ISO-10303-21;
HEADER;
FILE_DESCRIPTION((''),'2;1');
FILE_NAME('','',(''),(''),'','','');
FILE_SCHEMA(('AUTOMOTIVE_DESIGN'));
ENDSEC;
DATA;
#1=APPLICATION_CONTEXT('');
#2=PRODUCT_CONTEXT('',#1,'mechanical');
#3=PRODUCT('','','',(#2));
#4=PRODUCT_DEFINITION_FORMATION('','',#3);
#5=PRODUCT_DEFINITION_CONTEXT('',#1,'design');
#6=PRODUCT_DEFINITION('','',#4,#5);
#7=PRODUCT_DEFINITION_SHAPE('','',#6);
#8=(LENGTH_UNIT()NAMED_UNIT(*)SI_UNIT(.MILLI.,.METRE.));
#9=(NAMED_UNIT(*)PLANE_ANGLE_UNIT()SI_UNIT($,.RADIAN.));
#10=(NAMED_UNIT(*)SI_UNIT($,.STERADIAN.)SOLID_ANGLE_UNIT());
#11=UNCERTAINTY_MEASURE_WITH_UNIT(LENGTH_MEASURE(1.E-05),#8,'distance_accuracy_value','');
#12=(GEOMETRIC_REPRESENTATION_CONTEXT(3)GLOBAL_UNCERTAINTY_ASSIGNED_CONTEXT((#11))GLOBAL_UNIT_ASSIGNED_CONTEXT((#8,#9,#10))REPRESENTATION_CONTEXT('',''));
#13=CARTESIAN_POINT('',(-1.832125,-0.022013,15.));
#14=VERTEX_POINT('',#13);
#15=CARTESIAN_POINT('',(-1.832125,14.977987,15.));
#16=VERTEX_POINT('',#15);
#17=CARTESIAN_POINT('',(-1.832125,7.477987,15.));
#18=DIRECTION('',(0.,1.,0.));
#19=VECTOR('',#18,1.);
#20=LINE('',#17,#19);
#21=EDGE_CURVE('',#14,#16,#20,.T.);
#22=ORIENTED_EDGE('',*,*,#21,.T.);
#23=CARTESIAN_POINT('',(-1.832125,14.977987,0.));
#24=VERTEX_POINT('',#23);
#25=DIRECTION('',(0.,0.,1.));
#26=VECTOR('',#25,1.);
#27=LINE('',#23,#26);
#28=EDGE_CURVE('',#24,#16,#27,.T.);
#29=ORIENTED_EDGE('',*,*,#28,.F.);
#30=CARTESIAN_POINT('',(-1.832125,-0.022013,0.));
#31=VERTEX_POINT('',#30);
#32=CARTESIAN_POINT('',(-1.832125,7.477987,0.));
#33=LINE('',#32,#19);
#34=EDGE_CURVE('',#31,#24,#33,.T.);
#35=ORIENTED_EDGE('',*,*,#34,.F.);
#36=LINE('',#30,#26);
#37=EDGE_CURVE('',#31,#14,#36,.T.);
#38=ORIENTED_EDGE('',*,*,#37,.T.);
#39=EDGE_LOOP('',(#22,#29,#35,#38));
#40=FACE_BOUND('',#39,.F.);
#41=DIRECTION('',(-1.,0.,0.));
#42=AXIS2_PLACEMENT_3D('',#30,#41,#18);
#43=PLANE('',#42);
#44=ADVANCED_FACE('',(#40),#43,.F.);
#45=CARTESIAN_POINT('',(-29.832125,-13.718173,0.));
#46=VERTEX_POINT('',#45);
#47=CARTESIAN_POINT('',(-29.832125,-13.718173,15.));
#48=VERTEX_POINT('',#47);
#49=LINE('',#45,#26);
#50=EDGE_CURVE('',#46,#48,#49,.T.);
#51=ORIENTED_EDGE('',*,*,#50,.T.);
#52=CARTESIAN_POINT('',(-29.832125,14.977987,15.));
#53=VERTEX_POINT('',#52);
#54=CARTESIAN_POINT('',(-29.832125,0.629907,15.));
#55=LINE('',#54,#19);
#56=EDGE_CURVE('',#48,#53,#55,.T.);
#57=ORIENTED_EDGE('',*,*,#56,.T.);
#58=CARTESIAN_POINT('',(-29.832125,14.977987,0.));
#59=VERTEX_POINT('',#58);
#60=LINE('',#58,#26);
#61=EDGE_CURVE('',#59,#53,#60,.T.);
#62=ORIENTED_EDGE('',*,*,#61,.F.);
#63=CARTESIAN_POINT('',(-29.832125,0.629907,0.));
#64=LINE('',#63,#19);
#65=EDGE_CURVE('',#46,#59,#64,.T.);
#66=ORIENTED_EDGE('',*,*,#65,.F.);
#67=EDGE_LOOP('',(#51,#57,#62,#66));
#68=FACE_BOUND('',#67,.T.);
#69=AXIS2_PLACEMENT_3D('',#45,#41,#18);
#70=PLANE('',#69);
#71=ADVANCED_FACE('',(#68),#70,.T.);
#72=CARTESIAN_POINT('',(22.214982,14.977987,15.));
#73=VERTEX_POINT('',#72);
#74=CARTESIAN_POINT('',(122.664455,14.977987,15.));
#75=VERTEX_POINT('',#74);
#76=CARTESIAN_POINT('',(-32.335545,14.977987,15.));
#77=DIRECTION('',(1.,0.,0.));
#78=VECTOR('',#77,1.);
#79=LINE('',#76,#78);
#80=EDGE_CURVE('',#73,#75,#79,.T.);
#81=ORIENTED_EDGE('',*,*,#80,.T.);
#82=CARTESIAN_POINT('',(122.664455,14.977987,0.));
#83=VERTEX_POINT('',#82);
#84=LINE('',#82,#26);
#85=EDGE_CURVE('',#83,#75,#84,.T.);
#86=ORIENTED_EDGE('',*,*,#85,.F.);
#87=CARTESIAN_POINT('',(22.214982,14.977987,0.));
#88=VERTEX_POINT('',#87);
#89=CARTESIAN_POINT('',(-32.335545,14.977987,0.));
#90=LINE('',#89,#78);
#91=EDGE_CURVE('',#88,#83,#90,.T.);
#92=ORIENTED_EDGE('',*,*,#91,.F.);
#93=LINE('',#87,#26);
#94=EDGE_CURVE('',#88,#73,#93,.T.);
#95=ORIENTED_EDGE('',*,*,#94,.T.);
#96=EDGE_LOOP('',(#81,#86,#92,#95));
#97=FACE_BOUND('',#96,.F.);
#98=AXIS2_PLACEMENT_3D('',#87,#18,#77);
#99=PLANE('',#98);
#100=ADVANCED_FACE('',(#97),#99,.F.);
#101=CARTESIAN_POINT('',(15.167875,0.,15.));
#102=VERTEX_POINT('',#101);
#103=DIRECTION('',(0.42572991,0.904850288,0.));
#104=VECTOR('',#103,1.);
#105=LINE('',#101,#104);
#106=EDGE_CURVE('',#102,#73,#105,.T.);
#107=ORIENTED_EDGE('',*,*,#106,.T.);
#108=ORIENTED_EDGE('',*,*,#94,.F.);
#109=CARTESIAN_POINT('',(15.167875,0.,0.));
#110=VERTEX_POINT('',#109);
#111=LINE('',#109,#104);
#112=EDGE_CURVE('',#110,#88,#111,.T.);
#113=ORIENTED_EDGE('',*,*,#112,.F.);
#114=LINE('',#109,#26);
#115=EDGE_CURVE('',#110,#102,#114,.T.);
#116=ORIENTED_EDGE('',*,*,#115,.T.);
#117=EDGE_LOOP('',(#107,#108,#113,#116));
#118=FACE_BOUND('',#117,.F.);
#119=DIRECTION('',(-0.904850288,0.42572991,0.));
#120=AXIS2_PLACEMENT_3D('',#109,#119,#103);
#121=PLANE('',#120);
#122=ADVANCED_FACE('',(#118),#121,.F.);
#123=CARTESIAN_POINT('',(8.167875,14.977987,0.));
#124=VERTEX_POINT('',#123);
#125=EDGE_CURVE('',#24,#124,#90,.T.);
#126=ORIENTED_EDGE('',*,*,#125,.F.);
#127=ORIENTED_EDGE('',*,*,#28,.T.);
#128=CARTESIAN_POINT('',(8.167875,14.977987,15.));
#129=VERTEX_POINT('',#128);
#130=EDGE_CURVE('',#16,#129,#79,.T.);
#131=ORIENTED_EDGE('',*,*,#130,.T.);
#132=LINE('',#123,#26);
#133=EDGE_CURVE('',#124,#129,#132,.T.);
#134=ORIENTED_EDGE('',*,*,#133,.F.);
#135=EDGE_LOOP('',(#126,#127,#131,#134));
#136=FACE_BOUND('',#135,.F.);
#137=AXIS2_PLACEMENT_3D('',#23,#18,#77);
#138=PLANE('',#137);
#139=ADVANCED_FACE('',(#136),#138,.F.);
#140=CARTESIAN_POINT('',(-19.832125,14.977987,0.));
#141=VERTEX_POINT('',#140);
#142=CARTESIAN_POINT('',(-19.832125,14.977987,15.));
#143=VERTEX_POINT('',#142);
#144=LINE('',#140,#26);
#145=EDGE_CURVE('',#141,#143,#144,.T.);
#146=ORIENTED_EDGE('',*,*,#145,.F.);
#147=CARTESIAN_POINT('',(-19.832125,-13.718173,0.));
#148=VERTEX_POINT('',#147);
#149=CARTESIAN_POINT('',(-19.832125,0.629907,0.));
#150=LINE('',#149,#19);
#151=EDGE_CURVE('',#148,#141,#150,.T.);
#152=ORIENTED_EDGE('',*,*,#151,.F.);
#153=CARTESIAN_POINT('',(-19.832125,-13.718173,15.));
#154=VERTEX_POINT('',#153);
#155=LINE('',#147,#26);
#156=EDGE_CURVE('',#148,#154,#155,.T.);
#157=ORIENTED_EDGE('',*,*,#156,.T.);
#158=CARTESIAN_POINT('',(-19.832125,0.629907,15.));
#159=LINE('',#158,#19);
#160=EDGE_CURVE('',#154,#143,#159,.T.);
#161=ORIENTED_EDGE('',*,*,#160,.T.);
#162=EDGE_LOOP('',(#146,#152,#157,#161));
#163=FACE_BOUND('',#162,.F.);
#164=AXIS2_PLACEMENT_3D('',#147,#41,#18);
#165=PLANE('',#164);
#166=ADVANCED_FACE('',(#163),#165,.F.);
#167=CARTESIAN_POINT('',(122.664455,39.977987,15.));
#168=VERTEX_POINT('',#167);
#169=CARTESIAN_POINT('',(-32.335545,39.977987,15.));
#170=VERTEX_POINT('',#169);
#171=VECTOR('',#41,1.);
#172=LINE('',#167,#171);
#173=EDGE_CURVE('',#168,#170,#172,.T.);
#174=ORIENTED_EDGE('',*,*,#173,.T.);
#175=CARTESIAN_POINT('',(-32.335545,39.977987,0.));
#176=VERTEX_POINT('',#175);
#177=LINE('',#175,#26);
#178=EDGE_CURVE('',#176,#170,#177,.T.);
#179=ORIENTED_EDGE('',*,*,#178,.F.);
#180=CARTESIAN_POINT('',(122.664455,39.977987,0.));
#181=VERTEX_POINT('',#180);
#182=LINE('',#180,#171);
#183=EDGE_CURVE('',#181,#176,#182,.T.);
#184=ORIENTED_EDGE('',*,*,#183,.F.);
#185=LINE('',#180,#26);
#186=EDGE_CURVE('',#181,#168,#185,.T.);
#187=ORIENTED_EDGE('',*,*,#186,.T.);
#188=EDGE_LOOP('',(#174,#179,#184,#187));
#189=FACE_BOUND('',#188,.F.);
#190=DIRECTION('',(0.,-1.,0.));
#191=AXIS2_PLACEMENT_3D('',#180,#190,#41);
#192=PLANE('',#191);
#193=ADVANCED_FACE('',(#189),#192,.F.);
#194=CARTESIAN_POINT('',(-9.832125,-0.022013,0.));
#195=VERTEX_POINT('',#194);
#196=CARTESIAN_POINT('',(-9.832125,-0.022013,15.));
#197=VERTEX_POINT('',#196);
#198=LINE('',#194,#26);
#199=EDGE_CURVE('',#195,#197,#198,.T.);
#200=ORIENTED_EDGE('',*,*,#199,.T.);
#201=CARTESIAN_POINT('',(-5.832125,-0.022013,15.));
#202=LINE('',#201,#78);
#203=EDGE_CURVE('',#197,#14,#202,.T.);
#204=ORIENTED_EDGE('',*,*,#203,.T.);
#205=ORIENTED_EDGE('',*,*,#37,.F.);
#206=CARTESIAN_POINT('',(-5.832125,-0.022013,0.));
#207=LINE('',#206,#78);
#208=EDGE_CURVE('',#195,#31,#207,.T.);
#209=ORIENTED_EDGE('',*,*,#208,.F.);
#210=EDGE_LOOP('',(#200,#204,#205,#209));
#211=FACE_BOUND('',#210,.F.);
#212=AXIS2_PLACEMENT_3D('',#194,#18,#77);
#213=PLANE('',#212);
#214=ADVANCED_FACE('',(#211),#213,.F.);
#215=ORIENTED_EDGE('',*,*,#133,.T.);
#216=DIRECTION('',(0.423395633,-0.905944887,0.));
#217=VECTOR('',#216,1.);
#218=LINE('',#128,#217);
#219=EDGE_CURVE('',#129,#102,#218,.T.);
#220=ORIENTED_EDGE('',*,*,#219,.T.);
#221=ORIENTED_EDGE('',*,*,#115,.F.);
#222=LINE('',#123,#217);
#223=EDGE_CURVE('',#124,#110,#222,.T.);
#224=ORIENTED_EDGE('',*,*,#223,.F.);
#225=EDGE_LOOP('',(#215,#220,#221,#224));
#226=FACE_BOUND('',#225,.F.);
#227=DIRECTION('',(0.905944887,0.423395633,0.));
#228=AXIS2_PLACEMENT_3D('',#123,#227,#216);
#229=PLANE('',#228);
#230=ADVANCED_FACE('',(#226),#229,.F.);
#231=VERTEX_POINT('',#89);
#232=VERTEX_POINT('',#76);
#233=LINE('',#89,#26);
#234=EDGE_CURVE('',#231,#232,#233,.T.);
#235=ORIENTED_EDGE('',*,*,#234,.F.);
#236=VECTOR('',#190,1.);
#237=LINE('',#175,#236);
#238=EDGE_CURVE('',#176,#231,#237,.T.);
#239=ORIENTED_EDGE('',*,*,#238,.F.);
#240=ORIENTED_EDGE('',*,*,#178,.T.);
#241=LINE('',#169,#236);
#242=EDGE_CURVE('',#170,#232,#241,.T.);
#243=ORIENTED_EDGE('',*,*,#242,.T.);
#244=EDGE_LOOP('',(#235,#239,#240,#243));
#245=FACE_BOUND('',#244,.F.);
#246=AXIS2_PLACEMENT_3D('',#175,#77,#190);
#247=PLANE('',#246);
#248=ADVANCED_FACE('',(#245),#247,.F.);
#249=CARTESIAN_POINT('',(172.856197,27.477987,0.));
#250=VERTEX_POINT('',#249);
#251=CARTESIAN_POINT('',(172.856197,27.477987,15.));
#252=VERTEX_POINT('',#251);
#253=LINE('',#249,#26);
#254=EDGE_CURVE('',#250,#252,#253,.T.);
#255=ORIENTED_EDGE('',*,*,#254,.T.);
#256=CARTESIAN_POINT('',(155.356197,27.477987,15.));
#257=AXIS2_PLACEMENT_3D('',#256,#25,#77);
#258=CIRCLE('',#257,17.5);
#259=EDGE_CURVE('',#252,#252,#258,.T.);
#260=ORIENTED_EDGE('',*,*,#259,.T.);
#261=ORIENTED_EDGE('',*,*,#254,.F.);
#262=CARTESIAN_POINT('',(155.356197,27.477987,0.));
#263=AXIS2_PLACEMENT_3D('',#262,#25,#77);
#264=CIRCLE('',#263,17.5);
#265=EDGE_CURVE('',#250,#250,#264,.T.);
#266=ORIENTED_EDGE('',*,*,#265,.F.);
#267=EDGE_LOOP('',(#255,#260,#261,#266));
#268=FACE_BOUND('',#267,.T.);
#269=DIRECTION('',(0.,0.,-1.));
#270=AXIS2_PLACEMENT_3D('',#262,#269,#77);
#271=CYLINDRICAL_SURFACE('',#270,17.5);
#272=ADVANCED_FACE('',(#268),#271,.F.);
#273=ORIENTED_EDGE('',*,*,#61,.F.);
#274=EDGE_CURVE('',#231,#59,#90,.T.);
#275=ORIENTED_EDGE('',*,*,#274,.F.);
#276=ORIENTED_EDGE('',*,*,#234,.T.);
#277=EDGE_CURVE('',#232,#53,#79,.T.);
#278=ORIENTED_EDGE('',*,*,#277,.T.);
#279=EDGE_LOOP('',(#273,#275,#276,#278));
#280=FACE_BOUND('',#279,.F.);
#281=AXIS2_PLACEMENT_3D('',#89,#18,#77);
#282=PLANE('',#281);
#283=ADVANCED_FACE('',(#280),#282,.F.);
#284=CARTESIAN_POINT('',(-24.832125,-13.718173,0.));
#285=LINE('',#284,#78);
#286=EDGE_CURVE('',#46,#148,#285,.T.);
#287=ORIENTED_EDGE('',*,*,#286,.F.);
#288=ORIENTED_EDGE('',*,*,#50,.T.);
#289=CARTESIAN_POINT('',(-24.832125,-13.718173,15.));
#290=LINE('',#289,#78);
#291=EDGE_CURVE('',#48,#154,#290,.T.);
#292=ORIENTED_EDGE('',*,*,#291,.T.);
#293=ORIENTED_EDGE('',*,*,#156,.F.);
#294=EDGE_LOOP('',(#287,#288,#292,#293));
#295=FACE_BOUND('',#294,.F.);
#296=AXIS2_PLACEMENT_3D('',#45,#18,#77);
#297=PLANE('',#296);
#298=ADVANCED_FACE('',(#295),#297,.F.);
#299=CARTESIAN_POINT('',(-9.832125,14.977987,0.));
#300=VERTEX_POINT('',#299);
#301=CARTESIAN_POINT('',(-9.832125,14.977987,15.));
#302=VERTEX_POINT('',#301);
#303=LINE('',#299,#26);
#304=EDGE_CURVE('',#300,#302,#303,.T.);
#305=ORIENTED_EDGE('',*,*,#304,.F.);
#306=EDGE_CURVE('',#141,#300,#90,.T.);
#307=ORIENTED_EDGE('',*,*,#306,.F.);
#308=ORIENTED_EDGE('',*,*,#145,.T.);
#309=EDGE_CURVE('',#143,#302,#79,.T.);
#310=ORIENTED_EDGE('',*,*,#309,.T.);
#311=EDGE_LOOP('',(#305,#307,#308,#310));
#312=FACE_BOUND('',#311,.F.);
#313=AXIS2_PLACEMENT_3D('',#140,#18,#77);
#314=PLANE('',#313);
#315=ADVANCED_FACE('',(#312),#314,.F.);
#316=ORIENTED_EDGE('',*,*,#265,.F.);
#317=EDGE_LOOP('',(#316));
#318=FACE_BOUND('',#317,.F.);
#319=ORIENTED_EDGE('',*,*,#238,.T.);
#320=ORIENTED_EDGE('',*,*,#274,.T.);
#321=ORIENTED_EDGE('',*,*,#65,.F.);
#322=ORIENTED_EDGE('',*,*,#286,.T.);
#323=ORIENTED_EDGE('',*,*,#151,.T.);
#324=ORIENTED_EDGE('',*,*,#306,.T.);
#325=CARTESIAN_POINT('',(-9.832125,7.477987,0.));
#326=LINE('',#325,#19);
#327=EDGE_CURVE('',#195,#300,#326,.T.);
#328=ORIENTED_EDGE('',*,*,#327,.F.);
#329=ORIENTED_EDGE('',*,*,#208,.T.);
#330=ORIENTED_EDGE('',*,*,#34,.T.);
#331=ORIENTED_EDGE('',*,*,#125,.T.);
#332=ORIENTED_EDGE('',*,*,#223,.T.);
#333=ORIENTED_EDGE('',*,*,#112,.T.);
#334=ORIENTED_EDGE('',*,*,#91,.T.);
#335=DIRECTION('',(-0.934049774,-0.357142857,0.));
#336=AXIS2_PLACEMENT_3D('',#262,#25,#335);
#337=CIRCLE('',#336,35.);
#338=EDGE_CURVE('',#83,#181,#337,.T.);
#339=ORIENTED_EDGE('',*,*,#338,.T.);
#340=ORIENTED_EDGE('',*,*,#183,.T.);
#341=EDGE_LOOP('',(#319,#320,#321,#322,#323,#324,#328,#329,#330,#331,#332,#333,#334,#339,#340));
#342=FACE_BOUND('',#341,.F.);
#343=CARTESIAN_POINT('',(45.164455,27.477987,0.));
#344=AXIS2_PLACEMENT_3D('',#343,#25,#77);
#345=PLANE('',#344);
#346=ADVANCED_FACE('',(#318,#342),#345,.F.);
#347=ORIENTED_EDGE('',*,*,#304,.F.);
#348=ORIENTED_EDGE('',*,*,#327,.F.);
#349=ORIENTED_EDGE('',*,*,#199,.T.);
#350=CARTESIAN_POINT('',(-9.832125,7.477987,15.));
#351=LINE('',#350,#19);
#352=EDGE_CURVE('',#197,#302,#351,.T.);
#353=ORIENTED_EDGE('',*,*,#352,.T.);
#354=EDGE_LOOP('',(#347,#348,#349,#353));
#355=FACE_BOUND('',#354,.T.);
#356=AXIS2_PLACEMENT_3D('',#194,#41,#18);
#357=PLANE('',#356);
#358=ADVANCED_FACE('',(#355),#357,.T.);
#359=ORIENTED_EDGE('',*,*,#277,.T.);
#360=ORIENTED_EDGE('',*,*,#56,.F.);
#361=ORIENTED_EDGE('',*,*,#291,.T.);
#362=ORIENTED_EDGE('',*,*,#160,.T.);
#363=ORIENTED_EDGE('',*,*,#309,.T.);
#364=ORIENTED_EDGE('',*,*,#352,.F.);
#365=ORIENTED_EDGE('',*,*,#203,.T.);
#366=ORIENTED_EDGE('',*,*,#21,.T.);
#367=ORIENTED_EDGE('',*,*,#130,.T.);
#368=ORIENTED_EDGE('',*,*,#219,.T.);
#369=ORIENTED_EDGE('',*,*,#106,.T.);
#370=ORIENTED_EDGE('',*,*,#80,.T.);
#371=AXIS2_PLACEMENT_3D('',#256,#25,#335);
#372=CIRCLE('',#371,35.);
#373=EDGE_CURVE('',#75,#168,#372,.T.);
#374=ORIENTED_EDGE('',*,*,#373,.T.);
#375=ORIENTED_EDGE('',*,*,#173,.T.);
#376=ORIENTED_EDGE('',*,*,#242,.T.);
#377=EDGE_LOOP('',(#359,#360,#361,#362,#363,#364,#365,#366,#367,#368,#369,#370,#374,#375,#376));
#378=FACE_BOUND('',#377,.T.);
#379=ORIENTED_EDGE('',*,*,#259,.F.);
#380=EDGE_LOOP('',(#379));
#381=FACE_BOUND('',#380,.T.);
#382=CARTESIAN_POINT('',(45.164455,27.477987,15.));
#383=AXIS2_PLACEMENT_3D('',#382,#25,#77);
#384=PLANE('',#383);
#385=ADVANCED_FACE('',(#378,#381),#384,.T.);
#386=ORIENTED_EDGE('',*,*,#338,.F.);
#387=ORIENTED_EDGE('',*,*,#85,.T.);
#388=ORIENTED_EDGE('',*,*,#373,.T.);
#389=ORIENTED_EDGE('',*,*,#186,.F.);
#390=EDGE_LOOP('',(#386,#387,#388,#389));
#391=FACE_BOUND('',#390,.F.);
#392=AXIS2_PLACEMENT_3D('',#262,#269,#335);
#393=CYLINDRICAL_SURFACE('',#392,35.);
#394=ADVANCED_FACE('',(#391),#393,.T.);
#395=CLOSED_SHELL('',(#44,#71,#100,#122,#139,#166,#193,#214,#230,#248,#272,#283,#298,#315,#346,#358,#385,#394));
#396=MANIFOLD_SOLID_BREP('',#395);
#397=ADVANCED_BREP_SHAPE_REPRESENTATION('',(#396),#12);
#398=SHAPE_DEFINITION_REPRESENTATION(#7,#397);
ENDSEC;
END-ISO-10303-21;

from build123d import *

# Parameters (mm, degrees)
F0_R     = 17.5
F0_W     = 10
F0_H     = 28.6961602334
F0_W_2   = 8
F0_H_2   = 15
F1_DEPTH = 15


# Not quite as in the source:
# - a feature of the source that left no trace in its solid (it failed there, or was rolled back) is left out


with BuildPart() as f1:
    # F0 (on Top) → F1 (new body)
    with BuildSketch(Plane.XY):
        Polygon((122.6644553625, 14.977986814), (122.6644553625, 39.977986814), (-32.3355446375, 39.977986814), (-32.3355446375, 14.977986814), (-29.8321247846, 14.977986814), (-19.8321247846, 14.977986814), (-9.8321247846, 14.977986814), (-1.8321247846, 14.977986814), (8.1678752154, 14.977986814), (22.2149824233, 14.977986814), align=None)
        with BuildLine():
            ThreePointArc((122.6644553625, 14.977986814), (190.356197439, 27.477986814), (122.6644553625, 39.977986814))
            Line((122.6644553625, 39.977986814), (122.6644553625, 14.977986814))
        make_face()
        with Locations((155.356197439, 27.477986814)):
            Circle(F0_R, mode=Mode.SUBTRACT)
        with Locations((-24.8321247846, 0.6299066973)):
            Rectangle(F0_W, F0_H)
        with Locations((-5.8321247846, 7.477986814)):
            Rectangle(F0_W_2, F0_H_2)
        Polygon((15.1678752154, 0), (22.2149824233, 14.977986814), (8.1678752154, 14.977986814), align=None)
    extrude(amount=F1_DEPTH)


solid = f1.part
